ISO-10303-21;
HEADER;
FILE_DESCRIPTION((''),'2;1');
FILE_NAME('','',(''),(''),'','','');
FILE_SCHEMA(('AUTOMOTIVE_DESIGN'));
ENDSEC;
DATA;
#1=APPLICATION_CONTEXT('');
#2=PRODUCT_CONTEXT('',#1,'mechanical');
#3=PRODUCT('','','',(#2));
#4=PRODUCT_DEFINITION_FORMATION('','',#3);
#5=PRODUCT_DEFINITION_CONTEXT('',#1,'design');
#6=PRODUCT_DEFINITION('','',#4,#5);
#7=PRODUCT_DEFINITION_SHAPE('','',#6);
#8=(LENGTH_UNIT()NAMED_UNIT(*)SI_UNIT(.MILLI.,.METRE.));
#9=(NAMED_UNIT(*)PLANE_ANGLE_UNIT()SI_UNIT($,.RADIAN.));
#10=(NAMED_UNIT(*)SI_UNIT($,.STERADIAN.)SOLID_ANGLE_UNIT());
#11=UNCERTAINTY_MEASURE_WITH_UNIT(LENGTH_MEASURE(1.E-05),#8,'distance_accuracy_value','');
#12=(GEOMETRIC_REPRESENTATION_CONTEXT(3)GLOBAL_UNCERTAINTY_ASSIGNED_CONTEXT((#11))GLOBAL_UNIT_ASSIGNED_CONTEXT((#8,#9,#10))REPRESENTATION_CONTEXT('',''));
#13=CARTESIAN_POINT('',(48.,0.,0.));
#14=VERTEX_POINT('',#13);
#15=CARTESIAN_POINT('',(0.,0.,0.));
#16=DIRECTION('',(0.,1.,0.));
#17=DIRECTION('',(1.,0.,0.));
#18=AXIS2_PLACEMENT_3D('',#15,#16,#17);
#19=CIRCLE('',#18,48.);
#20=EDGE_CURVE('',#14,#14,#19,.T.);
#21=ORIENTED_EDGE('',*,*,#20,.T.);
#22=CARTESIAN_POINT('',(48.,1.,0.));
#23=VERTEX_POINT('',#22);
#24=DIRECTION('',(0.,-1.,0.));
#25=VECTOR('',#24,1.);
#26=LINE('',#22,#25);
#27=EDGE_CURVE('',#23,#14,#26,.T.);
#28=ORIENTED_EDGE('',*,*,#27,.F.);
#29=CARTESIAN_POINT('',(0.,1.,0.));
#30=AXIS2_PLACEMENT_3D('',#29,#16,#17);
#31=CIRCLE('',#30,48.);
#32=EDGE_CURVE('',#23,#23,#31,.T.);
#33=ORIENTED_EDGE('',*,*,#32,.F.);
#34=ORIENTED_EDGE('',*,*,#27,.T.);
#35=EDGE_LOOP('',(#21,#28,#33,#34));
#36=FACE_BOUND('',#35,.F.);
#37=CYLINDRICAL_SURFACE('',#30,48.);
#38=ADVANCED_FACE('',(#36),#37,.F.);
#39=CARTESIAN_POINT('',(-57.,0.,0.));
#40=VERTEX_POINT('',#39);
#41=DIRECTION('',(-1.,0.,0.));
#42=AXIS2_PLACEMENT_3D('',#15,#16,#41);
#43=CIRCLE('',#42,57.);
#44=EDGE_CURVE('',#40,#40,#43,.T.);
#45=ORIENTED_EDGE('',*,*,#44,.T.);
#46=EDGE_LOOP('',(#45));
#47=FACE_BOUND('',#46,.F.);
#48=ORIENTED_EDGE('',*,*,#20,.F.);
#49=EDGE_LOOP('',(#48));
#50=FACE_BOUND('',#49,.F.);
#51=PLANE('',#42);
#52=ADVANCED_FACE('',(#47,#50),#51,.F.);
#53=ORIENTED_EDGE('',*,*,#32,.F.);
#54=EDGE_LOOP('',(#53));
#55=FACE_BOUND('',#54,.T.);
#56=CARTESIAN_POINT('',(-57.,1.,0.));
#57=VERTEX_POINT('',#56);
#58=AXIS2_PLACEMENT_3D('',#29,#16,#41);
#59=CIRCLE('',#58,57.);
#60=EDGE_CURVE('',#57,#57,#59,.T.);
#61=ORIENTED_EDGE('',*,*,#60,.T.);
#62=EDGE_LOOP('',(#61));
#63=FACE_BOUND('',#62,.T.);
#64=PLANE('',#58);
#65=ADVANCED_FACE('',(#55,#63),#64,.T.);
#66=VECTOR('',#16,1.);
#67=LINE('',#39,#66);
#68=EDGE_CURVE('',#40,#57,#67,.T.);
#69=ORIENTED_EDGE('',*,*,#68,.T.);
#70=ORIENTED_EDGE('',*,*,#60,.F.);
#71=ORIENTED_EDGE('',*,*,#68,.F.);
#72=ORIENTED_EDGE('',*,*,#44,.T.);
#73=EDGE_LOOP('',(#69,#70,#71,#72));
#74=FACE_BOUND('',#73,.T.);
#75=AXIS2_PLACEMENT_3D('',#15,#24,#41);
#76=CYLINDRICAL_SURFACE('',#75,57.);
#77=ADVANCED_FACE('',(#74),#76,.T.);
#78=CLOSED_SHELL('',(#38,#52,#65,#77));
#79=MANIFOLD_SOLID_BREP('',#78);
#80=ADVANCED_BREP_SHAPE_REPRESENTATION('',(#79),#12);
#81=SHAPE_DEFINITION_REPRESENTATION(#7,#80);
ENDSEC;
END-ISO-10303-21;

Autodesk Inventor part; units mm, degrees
ref_plane "YZ Plane" through (0, 0, 0) normal (1, 0, 0) x (0, 1, 0)
ref_plane "XZ Plane" through (0, 0, 0) normal (0, 1, 0) x (-1, 0, 0)
ref_plane "XY Plane" through (0, 0, 0) normal (0, 0, 1) x (1, 0, 0)
sketch "Skizze5" plane through (0, 0, 0) normal (0, 0, 1) x (1, 0, 0)
  line L0 (0, 0) -> (0, -48)
  arc A0 (-48, 0) -> (0, -48) centre (0, 0) ccw
  dimension "d17" = 48
surface revolve "Rotationsfläche3" sketch "Skizze5" angle 360 about axis through (0, 0, 0) along (0, -1, 0) shown yes curves A0 L0
sketch "Skizze6" plane through (0, 0, 0) normal (0, 0, 1) x (1, 0, 0)
  line L0 (0, 0) -> (0, -49)
  arc A0 (-49, 0) -> (0, -49) centre (0, 0) ccw
  dimension "d19" = 49
surface revolve "Rotationsfläche4" sketch "Skizze6" angle 360 about axis through (0, 0, 0) along (0, -1, 0) shown yes curves A0 L0
sketch "Skizze7" plane through (0, 0, 0) normal (0, 1, 0) x (-1, 0, 0)
  circle A0 centre (0, 0) radius 57
  dimension "d21" = 114
extrude "Extrusion1" add sketch "Skizze7" along normal blind 1
sketch "Skizze8" plane through (0, 1, 0) normal (0, 1, 0) x (1, 0, 0)
  point P0 (0, 0)
sketch "Skizze9" plane through (0, 1, 0) normal (0, 1, 0) x (1, 0, 0)
  circle A0 centre (0, 0) radius 48
extrude "Extrusion2" cut sketch "Skizze9" against normal blind 1
properties part number "Futterschüssel_innen" material "Edelstahl"
